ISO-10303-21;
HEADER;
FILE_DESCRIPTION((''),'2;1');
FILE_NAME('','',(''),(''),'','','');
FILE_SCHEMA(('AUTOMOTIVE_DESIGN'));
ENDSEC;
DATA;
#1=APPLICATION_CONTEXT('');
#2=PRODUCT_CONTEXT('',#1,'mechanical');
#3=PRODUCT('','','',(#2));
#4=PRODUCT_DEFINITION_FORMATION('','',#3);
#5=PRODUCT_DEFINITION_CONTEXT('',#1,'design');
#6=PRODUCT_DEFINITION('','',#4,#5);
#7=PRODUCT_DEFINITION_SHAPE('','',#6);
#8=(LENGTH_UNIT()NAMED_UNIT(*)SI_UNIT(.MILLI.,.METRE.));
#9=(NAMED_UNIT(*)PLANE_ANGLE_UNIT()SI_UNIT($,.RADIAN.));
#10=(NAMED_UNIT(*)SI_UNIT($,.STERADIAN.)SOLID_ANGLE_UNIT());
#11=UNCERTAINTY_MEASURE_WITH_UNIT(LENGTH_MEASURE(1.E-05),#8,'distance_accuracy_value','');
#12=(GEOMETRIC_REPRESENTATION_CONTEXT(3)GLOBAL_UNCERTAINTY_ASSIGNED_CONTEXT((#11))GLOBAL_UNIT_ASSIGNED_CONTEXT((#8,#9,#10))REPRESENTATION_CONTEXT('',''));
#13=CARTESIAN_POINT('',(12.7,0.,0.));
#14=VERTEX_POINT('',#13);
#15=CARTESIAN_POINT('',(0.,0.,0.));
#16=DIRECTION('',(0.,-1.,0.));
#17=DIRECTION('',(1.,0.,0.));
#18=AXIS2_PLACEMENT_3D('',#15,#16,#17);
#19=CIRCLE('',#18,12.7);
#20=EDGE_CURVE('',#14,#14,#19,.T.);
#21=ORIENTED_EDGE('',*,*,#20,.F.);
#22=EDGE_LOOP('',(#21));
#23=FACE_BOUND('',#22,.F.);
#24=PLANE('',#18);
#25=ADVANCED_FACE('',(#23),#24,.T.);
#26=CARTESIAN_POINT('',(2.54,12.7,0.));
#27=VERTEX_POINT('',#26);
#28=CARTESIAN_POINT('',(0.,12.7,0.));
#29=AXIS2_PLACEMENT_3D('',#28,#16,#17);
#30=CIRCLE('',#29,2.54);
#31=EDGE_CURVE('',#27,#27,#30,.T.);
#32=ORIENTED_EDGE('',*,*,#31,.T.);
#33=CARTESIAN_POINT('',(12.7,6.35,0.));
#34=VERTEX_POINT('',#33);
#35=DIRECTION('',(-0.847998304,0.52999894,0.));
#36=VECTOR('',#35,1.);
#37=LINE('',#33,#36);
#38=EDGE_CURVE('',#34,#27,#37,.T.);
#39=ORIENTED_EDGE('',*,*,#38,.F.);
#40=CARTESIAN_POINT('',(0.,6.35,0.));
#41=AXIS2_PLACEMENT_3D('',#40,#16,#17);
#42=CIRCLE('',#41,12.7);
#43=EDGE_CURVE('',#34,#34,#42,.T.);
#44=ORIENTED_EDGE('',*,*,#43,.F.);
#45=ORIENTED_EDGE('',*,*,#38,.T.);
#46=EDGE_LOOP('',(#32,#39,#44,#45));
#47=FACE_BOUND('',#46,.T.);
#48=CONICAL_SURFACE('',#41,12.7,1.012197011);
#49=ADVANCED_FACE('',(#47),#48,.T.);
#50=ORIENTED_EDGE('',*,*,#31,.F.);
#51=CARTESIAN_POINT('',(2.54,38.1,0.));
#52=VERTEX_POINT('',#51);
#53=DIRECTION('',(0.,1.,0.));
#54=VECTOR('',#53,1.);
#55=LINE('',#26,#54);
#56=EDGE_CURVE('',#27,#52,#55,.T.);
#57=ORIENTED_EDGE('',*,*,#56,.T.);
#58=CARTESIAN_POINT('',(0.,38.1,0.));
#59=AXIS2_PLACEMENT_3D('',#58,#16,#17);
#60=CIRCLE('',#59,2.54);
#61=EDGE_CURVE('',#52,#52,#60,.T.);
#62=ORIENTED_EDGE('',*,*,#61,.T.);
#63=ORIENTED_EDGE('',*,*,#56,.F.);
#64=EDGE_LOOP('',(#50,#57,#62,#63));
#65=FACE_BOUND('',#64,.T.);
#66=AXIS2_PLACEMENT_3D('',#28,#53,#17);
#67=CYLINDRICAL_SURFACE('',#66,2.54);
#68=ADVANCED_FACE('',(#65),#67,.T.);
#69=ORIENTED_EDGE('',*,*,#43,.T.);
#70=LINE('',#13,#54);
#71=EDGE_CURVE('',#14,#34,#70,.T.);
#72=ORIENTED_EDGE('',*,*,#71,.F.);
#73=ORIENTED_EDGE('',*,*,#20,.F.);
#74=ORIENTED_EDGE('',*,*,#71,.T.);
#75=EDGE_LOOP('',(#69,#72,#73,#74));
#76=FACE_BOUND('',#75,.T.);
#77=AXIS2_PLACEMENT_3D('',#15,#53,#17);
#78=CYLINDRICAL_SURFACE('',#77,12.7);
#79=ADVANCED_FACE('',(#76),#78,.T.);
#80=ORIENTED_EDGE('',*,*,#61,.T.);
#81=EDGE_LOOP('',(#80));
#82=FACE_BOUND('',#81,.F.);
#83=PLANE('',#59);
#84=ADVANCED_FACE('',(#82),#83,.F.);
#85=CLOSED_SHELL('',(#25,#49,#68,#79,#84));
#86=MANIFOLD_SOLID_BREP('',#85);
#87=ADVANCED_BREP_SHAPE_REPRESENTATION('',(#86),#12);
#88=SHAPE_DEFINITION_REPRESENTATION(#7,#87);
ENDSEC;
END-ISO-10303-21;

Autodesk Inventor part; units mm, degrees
ref_plane "YZ Plane" through (0, 0, 0) normal (1, 0, 0) x (0, 1, 0)
ref_plane "XZ Plane" through (0, 0, 0) normal (0, 1, 0) x (-1, 0, 0)
ref_plane "XY Plane" through (0, 0, 0) normal (0, 0, 1) x (1, 0, 0)
sketch "Sketch1" plane through (0, 0, 0) normal (0, 0, 1) x (1, 0, 0)
  line L0 (0, 0) -> (12.7, 0)
  line L1 (12.7, 0) -> (12.7, 6.35)
  line L2 (12.7, 6.35) -> (2.54, 12.7)
  line L3 (2.54, 12.7) -> (0, 12.7)
  line L4 (0, 12.7) -> (0, 0)
  line L5 (2.54, 12.7) -> (2.54, 38.1)
  line L6 (2.54, 38.1) -> (0, 38.1)
  line L7 (0, 38.1) -> (0, 0)
  point P0 (0, 12.7)
  dimension "d0" = 12.7
  dimension "d1" = 6.35
  dimension "d2" = 6.35
  dimension "d3" = 2.54
  dimension "d4" = 25.4
revolve "Revolution1" add sketch "Sketch1" angle 360 about axis through (0, 38.1, 0) along (0, -1, 0)
thread "Thread1" size "12-24 UNC" class "2A" standard "ANSI Unified Screw Threads" length 12.7
properties part number "Foot"
